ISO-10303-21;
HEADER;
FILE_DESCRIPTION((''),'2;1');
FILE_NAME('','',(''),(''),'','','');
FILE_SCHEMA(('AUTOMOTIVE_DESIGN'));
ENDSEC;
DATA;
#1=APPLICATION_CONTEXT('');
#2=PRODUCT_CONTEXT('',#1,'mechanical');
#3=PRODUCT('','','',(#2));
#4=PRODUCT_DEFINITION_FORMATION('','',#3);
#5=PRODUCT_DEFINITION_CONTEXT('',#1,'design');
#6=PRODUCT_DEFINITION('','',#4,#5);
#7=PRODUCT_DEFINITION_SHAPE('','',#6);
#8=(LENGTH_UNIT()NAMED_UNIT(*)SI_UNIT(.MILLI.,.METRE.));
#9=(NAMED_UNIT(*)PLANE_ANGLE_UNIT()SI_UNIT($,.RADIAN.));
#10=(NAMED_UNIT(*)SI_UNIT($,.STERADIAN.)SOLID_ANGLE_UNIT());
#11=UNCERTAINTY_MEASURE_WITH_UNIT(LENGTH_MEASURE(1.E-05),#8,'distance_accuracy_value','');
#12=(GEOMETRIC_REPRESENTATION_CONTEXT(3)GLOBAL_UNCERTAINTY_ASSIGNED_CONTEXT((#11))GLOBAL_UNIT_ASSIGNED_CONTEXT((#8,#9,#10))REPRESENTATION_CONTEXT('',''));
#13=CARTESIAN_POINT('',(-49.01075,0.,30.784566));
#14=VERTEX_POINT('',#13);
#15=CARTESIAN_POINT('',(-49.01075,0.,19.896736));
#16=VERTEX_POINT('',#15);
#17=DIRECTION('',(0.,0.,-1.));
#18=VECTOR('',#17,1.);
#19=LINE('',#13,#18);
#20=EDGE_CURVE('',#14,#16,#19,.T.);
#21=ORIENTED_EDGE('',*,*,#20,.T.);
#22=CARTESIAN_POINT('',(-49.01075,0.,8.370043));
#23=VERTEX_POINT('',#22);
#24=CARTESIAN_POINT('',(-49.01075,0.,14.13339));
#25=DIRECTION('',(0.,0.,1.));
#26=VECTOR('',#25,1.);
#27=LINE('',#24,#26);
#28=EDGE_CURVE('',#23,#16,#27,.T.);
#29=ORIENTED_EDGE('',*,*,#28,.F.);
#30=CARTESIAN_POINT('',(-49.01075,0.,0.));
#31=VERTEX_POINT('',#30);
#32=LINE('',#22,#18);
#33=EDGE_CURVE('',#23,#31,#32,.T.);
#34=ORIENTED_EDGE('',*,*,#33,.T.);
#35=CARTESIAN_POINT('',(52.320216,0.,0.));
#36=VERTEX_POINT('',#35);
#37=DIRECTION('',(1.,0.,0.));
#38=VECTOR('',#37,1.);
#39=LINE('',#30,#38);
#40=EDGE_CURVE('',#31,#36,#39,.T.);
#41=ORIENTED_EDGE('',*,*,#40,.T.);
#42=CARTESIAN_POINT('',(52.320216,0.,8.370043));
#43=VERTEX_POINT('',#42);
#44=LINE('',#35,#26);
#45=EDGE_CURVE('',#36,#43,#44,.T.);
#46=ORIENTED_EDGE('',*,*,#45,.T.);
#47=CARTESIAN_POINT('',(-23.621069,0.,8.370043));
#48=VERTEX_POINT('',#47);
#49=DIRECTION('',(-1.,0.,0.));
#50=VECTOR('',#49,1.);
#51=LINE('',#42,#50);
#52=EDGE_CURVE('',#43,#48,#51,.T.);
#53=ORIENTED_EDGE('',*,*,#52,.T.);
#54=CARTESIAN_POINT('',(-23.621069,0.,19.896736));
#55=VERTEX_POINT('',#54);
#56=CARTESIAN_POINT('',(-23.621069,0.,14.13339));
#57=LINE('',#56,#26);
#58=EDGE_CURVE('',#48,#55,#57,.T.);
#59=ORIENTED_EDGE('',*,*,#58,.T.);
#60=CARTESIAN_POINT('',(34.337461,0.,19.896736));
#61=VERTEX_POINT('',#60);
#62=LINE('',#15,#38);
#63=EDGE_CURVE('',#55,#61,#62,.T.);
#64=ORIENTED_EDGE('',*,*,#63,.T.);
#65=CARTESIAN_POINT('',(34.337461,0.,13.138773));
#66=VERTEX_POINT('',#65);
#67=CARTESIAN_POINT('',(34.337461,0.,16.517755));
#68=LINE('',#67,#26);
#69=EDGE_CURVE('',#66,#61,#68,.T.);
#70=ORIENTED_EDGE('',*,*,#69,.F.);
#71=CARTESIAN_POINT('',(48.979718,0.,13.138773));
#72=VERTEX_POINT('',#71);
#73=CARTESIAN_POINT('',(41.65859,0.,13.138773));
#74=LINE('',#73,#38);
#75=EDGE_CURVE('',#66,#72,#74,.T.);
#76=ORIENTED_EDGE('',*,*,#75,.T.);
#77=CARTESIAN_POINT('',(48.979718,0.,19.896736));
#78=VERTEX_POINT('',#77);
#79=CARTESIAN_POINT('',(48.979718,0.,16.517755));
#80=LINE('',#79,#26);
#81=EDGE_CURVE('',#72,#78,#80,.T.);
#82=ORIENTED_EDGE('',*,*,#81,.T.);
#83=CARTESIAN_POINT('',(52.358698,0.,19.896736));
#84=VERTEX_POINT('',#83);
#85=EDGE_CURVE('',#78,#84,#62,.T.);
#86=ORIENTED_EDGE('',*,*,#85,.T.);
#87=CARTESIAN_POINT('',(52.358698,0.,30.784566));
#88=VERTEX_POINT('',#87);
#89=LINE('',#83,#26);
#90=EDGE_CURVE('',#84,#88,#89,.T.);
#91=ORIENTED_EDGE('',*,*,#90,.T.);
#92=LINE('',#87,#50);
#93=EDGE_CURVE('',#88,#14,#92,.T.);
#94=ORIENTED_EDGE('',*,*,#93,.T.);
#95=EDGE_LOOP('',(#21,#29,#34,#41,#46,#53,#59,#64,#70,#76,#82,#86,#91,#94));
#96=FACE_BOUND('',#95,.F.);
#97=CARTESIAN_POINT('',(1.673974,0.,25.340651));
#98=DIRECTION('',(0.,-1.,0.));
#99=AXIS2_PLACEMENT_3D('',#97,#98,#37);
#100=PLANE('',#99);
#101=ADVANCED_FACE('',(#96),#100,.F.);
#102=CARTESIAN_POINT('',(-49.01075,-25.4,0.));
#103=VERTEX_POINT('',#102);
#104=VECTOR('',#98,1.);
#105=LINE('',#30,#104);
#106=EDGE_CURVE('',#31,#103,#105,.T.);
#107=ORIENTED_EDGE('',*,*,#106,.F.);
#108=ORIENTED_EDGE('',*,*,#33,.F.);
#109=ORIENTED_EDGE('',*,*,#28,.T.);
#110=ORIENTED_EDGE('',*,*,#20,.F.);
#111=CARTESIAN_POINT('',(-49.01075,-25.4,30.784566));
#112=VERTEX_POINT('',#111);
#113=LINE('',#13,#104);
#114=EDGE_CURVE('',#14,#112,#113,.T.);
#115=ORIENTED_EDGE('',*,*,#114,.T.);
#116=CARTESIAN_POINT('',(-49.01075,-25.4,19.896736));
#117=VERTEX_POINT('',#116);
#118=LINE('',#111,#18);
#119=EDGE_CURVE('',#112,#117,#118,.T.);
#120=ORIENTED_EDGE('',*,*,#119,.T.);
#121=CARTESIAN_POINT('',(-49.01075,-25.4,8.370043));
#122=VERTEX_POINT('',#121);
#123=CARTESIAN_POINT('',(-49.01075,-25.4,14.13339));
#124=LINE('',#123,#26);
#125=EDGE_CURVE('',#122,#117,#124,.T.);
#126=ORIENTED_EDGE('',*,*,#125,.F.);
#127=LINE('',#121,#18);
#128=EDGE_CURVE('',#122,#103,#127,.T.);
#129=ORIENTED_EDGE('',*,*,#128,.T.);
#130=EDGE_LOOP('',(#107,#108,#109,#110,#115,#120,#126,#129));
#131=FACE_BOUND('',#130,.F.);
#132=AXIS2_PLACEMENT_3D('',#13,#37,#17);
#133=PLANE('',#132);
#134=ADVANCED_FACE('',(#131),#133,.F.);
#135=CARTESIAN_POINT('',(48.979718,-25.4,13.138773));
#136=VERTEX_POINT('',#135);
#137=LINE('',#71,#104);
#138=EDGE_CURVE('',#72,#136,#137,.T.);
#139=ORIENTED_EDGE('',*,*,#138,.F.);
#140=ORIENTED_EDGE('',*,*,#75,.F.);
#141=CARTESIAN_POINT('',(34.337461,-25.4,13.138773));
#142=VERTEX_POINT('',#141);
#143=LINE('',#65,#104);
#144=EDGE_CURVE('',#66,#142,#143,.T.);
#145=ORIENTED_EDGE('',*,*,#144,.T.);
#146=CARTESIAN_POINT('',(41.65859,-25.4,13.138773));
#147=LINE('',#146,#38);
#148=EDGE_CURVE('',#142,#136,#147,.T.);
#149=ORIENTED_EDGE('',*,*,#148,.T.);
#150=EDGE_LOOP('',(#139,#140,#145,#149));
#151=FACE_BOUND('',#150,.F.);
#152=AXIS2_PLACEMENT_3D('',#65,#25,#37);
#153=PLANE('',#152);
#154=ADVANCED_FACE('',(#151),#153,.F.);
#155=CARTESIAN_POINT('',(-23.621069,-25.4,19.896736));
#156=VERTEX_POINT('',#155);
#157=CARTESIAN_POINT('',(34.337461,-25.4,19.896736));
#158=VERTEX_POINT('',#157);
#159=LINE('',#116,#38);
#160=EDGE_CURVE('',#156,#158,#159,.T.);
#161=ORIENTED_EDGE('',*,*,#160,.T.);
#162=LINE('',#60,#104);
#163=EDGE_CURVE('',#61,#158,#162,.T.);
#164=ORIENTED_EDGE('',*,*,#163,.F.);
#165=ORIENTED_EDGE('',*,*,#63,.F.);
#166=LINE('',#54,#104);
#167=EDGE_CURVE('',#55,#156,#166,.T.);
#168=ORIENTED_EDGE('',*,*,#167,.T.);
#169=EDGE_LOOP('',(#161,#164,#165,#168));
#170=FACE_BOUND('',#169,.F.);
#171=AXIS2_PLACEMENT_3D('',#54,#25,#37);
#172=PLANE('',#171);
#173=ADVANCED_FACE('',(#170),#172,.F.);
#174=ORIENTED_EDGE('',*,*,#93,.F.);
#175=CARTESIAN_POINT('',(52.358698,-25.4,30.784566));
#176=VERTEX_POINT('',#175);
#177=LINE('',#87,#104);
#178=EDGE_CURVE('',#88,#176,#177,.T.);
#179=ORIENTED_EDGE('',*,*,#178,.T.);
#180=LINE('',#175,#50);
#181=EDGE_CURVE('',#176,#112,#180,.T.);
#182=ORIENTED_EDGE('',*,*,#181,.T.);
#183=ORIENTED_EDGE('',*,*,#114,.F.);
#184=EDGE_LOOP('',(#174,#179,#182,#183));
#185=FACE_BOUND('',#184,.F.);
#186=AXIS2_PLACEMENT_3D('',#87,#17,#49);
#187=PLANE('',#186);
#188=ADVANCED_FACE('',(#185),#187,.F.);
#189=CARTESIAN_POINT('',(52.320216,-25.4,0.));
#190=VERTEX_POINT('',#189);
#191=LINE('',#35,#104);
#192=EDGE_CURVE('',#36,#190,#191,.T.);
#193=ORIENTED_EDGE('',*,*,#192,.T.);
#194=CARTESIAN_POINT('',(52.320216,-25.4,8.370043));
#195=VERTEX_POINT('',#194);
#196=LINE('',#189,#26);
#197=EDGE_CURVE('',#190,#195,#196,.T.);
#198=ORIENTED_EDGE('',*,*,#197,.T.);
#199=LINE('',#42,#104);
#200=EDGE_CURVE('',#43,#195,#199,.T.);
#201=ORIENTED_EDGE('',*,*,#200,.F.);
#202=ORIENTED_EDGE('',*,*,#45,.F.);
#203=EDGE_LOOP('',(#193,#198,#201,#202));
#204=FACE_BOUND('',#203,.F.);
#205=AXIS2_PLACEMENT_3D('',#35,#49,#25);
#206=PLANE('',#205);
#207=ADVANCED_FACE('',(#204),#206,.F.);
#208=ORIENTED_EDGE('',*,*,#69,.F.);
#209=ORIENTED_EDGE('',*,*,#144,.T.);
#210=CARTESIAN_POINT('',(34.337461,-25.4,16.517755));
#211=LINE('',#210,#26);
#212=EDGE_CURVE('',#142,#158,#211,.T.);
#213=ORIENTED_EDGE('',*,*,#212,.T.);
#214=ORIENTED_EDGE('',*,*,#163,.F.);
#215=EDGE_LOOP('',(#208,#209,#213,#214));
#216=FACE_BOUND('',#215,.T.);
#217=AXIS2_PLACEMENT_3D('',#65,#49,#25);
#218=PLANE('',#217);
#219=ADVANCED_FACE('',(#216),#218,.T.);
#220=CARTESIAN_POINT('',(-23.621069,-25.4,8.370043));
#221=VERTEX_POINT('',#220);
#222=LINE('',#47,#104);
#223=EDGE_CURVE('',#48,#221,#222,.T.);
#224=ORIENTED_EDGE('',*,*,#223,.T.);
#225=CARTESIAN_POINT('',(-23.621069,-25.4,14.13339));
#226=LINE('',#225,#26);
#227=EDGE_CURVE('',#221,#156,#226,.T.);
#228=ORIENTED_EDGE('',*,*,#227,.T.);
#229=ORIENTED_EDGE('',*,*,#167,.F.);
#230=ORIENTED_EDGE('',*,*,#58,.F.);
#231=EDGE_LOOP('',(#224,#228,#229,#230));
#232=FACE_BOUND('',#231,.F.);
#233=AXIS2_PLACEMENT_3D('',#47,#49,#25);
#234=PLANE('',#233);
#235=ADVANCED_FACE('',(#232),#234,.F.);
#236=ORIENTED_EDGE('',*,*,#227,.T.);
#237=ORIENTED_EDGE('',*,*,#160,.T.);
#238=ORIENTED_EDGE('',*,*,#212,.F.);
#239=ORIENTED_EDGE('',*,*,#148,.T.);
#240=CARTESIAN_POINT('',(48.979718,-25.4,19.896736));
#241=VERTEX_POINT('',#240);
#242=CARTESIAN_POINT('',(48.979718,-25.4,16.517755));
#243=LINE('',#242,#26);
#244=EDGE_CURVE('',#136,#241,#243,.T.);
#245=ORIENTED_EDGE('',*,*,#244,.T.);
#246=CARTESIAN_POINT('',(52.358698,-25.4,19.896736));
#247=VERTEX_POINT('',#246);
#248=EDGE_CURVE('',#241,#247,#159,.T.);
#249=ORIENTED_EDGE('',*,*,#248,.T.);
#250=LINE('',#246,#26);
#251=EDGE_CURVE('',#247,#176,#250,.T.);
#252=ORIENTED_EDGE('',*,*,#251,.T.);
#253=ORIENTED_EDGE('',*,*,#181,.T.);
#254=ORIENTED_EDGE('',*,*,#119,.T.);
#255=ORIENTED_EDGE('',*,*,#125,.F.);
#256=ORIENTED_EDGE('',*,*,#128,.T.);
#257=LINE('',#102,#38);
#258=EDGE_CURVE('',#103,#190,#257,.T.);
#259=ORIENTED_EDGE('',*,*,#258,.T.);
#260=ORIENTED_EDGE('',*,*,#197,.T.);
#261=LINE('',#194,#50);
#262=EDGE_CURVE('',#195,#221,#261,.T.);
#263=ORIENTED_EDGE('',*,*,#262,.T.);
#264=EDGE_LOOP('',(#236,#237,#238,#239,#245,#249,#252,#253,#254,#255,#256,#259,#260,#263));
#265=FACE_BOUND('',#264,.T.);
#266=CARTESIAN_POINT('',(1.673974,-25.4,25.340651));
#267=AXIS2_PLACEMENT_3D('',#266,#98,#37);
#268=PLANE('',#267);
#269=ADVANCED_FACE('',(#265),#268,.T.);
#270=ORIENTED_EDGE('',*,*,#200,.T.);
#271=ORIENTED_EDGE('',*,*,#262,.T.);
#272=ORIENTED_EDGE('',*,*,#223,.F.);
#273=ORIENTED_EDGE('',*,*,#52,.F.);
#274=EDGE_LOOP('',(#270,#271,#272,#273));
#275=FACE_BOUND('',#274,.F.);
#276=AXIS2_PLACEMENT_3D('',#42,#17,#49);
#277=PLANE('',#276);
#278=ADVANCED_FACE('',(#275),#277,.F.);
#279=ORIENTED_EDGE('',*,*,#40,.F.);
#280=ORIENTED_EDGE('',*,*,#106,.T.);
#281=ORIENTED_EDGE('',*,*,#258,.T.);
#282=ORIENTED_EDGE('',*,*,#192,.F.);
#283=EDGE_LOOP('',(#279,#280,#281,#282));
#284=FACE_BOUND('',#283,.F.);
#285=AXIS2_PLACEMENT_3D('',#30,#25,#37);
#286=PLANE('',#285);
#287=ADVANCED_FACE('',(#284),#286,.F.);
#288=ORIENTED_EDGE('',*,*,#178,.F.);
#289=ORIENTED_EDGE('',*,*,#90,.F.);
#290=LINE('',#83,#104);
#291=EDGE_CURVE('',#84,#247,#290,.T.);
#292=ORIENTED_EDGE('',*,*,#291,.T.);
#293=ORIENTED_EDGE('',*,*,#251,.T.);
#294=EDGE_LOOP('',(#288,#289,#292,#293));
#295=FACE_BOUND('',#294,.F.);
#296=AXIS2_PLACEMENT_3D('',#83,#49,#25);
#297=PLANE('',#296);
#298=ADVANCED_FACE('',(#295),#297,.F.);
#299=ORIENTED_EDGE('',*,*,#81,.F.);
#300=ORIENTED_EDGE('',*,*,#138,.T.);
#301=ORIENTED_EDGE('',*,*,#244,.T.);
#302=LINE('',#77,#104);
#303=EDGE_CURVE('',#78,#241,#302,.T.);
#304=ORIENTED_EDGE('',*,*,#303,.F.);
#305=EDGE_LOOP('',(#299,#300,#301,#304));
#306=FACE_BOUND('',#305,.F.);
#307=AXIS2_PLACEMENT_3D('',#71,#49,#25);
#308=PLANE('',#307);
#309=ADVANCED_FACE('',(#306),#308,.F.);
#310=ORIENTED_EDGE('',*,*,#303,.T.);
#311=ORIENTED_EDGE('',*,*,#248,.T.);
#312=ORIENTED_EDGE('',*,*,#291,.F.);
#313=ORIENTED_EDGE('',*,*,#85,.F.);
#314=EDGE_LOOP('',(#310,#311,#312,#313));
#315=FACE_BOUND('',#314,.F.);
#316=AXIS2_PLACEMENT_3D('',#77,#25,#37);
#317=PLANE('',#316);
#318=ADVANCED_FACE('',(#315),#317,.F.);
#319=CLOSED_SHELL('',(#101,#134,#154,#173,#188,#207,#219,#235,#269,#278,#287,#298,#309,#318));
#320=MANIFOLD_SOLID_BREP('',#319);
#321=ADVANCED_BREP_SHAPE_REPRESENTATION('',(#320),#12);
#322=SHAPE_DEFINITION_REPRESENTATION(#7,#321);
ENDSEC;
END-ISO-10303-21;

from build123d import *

# Parameters (mm, degrees)
F0_W     = 25.3896806389
F0_H     = 11.52669359
F0_W_2   = 14.6422572434
F0_H_2   = 6.7579634488
F1_DEPTH = 25.4


with BuildPart() as f1:
    # F0 (on Front) → F1 (new body)
    with BuildSketch(Plane.XZ):
        Polygon((52.3586980999, 30.7845659554), (-49.0107499063, 30.7845659554), (-49.0107499063, 19.8967363685), (-23.6210692674, 19.8967363685), (34.3374609947, 19.8967363685), (48.9797182381, 19.8967363685), (52.3586980999, 19.8967363685), align=None)
        with Locations((-36.3159095868, 14.1333895735)):
            Rectangle(F0_W, F0_H)
        Polygon((-23.6210692674, 8.3700427786), (-49.0107499063, 8.3700427786), (-49.0107499063, 0), (52.3202158511, 0), (52.3202158511, 8.3700427786), align=None)
        with Locations((41.6585896164, 16.5177546442)):
            Rectangle(F0_W_2, F0_H_2)
    extrude(amount=F1_DEPTH)


solid = f1.part
